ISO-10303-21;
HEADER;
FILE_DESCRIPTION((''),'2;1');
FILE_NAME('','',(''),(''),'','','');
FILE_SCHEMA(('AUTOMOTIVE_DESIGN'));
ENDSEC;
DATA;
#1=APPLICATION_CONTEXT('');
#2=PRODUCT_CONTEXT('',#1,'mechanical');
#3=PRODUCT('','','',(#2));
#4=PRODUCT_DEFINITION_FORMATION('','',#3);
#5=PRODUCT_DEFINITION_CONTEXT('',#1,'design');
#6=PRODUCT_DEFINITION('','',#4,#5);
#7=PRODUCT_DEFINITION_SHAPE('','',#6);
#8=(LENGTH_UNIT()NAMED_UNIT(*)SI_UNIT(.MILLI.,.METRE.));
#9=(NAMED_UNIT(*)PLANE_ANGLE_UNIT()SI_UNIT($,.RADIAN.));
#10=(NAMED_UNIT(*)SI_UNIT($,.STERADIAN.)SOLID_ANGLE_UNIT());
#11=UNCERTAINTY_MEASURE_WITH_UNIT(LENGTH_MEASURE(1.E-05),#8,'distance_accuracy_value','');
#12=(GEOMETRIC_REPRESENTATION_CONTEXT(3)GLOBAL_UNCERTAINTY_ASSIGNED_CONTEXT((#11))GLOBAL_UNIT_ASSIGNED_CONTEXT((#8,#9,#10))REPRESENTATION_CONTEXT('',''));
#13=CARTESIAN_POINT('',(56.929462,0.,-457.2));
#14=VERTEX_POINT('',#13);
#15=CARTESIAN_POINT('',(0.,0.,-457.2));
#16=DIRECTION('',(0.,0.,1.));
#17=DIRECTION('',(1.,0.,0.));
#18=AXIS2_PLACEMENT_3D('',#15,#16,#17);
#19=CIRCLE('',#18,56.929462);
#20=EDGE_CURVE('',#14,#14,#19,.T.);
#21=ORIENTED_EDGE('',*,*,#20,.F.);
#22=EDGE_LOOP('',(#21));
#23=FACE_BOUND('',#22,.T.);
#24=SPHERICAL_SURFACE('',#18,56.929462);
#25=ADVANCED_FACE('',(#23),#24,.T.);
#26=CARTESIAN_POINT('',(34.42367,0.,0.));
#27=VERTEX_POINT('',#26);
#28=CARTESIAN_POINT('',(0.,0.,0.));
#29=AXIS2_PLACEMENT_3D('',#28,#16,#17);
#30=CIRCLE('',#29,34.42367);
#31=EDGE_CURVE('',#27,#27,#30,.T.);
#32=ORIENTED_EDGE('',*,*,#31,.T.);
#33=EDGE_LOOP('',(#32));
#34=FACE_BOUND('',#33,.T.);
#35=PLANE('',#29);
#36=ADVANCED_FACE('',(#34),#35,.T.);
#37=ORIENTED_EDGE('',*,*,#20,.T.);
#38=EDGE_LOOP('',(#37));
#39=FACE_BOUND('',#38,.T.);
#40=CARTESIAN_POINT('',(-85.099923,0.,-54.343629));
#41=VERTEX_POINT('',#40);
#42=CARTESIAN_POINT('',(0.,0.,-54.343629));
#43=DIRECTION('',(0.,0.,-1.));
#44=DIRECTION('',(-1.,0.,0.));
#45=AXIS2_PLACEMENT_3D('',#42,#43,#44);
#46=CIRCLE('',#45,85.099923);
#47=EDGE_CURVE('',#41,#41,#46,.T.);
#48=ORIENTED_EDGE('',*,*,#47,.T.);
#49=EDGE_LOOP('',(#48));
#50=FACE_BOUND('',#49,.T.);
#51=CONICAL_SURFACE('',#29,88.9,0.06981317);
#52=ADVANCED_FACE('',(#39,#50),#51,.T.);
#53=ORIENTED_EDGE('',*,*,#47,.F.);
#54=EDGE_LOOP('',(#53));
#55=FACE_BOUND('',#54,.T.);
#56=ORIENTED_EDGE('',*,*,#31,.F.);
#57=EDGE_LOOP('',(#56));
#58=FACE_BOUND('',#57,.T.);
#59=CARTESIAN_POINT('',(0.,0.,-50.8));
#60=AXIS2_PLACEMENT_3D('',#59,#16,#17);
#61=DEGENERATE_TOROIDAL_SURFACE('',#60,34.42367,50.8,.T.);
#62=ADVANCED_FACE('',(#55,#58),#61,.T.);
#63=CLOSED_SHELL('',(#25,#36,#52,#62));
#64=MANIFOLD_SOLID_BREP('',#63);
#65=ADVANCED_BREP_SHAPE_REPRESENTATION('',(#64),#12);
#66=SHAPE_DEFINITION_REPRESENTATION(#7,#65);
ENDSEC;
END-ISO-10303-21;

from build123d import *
from build123d.topology import SkipClean

# Parameters (mm, degrees)
SKETCH3_R           = 88.9
BOSS_EXTRUDE1_DEPTH = 457.2
BOSS_EXTRUDE1_DRAFT = -4
FILLET1_R           = 50.8


with BuildPart() as part:
    # Sketch3 → Boss-Extrude1 (with draft: the straight prism first)
    with BuildSketch(Plane.XY):
        Circle(SKETCH3_R)
    extrude(amount=-BOSS_EXTRUDE1_DEPTH)
    # Boss-Extrude1: the draft: its side faces are tilted about the plane it starts from
    boss_extrude1_sides = [part.faces().sort_by_distance(p)[0] for p in [
        (-88.9, 0, -228.6),
    ]]
    draft(boss_extrude1_sides, Plane.XY, BOSS_EXTRUDE1_DRAFT)

    # Sketch6 → Revolve1 (revolve)
    with SkipClean():  # the faces are left unmerged after this step: merging them gives an invalid solid
        with BuildSketch(Plane(origin=(0, 0, 0), x_dir=(0, 0, -1), z_dir=(1, 0, 0))):
            with BuildLine():
                Line((457.2, -56.929461579), (457.2, 56.929461579))
                ThreePointArc((457.2, 56.929461579), (514.129461579, 0), (457.2, -56.929461579))
            make_face()
        revolve(axis=Axis((0, -56.929461579, -457.2), (0, 1, 0)))

    # Fillet1
    fillet1_edges = [part.edges().sort_by_distance(p)[0] for p in [
        (-88.9, 0, 0),
    ]]
    fillet(fillet1_edges, radius=FILLET1_R)


solid = part.part
